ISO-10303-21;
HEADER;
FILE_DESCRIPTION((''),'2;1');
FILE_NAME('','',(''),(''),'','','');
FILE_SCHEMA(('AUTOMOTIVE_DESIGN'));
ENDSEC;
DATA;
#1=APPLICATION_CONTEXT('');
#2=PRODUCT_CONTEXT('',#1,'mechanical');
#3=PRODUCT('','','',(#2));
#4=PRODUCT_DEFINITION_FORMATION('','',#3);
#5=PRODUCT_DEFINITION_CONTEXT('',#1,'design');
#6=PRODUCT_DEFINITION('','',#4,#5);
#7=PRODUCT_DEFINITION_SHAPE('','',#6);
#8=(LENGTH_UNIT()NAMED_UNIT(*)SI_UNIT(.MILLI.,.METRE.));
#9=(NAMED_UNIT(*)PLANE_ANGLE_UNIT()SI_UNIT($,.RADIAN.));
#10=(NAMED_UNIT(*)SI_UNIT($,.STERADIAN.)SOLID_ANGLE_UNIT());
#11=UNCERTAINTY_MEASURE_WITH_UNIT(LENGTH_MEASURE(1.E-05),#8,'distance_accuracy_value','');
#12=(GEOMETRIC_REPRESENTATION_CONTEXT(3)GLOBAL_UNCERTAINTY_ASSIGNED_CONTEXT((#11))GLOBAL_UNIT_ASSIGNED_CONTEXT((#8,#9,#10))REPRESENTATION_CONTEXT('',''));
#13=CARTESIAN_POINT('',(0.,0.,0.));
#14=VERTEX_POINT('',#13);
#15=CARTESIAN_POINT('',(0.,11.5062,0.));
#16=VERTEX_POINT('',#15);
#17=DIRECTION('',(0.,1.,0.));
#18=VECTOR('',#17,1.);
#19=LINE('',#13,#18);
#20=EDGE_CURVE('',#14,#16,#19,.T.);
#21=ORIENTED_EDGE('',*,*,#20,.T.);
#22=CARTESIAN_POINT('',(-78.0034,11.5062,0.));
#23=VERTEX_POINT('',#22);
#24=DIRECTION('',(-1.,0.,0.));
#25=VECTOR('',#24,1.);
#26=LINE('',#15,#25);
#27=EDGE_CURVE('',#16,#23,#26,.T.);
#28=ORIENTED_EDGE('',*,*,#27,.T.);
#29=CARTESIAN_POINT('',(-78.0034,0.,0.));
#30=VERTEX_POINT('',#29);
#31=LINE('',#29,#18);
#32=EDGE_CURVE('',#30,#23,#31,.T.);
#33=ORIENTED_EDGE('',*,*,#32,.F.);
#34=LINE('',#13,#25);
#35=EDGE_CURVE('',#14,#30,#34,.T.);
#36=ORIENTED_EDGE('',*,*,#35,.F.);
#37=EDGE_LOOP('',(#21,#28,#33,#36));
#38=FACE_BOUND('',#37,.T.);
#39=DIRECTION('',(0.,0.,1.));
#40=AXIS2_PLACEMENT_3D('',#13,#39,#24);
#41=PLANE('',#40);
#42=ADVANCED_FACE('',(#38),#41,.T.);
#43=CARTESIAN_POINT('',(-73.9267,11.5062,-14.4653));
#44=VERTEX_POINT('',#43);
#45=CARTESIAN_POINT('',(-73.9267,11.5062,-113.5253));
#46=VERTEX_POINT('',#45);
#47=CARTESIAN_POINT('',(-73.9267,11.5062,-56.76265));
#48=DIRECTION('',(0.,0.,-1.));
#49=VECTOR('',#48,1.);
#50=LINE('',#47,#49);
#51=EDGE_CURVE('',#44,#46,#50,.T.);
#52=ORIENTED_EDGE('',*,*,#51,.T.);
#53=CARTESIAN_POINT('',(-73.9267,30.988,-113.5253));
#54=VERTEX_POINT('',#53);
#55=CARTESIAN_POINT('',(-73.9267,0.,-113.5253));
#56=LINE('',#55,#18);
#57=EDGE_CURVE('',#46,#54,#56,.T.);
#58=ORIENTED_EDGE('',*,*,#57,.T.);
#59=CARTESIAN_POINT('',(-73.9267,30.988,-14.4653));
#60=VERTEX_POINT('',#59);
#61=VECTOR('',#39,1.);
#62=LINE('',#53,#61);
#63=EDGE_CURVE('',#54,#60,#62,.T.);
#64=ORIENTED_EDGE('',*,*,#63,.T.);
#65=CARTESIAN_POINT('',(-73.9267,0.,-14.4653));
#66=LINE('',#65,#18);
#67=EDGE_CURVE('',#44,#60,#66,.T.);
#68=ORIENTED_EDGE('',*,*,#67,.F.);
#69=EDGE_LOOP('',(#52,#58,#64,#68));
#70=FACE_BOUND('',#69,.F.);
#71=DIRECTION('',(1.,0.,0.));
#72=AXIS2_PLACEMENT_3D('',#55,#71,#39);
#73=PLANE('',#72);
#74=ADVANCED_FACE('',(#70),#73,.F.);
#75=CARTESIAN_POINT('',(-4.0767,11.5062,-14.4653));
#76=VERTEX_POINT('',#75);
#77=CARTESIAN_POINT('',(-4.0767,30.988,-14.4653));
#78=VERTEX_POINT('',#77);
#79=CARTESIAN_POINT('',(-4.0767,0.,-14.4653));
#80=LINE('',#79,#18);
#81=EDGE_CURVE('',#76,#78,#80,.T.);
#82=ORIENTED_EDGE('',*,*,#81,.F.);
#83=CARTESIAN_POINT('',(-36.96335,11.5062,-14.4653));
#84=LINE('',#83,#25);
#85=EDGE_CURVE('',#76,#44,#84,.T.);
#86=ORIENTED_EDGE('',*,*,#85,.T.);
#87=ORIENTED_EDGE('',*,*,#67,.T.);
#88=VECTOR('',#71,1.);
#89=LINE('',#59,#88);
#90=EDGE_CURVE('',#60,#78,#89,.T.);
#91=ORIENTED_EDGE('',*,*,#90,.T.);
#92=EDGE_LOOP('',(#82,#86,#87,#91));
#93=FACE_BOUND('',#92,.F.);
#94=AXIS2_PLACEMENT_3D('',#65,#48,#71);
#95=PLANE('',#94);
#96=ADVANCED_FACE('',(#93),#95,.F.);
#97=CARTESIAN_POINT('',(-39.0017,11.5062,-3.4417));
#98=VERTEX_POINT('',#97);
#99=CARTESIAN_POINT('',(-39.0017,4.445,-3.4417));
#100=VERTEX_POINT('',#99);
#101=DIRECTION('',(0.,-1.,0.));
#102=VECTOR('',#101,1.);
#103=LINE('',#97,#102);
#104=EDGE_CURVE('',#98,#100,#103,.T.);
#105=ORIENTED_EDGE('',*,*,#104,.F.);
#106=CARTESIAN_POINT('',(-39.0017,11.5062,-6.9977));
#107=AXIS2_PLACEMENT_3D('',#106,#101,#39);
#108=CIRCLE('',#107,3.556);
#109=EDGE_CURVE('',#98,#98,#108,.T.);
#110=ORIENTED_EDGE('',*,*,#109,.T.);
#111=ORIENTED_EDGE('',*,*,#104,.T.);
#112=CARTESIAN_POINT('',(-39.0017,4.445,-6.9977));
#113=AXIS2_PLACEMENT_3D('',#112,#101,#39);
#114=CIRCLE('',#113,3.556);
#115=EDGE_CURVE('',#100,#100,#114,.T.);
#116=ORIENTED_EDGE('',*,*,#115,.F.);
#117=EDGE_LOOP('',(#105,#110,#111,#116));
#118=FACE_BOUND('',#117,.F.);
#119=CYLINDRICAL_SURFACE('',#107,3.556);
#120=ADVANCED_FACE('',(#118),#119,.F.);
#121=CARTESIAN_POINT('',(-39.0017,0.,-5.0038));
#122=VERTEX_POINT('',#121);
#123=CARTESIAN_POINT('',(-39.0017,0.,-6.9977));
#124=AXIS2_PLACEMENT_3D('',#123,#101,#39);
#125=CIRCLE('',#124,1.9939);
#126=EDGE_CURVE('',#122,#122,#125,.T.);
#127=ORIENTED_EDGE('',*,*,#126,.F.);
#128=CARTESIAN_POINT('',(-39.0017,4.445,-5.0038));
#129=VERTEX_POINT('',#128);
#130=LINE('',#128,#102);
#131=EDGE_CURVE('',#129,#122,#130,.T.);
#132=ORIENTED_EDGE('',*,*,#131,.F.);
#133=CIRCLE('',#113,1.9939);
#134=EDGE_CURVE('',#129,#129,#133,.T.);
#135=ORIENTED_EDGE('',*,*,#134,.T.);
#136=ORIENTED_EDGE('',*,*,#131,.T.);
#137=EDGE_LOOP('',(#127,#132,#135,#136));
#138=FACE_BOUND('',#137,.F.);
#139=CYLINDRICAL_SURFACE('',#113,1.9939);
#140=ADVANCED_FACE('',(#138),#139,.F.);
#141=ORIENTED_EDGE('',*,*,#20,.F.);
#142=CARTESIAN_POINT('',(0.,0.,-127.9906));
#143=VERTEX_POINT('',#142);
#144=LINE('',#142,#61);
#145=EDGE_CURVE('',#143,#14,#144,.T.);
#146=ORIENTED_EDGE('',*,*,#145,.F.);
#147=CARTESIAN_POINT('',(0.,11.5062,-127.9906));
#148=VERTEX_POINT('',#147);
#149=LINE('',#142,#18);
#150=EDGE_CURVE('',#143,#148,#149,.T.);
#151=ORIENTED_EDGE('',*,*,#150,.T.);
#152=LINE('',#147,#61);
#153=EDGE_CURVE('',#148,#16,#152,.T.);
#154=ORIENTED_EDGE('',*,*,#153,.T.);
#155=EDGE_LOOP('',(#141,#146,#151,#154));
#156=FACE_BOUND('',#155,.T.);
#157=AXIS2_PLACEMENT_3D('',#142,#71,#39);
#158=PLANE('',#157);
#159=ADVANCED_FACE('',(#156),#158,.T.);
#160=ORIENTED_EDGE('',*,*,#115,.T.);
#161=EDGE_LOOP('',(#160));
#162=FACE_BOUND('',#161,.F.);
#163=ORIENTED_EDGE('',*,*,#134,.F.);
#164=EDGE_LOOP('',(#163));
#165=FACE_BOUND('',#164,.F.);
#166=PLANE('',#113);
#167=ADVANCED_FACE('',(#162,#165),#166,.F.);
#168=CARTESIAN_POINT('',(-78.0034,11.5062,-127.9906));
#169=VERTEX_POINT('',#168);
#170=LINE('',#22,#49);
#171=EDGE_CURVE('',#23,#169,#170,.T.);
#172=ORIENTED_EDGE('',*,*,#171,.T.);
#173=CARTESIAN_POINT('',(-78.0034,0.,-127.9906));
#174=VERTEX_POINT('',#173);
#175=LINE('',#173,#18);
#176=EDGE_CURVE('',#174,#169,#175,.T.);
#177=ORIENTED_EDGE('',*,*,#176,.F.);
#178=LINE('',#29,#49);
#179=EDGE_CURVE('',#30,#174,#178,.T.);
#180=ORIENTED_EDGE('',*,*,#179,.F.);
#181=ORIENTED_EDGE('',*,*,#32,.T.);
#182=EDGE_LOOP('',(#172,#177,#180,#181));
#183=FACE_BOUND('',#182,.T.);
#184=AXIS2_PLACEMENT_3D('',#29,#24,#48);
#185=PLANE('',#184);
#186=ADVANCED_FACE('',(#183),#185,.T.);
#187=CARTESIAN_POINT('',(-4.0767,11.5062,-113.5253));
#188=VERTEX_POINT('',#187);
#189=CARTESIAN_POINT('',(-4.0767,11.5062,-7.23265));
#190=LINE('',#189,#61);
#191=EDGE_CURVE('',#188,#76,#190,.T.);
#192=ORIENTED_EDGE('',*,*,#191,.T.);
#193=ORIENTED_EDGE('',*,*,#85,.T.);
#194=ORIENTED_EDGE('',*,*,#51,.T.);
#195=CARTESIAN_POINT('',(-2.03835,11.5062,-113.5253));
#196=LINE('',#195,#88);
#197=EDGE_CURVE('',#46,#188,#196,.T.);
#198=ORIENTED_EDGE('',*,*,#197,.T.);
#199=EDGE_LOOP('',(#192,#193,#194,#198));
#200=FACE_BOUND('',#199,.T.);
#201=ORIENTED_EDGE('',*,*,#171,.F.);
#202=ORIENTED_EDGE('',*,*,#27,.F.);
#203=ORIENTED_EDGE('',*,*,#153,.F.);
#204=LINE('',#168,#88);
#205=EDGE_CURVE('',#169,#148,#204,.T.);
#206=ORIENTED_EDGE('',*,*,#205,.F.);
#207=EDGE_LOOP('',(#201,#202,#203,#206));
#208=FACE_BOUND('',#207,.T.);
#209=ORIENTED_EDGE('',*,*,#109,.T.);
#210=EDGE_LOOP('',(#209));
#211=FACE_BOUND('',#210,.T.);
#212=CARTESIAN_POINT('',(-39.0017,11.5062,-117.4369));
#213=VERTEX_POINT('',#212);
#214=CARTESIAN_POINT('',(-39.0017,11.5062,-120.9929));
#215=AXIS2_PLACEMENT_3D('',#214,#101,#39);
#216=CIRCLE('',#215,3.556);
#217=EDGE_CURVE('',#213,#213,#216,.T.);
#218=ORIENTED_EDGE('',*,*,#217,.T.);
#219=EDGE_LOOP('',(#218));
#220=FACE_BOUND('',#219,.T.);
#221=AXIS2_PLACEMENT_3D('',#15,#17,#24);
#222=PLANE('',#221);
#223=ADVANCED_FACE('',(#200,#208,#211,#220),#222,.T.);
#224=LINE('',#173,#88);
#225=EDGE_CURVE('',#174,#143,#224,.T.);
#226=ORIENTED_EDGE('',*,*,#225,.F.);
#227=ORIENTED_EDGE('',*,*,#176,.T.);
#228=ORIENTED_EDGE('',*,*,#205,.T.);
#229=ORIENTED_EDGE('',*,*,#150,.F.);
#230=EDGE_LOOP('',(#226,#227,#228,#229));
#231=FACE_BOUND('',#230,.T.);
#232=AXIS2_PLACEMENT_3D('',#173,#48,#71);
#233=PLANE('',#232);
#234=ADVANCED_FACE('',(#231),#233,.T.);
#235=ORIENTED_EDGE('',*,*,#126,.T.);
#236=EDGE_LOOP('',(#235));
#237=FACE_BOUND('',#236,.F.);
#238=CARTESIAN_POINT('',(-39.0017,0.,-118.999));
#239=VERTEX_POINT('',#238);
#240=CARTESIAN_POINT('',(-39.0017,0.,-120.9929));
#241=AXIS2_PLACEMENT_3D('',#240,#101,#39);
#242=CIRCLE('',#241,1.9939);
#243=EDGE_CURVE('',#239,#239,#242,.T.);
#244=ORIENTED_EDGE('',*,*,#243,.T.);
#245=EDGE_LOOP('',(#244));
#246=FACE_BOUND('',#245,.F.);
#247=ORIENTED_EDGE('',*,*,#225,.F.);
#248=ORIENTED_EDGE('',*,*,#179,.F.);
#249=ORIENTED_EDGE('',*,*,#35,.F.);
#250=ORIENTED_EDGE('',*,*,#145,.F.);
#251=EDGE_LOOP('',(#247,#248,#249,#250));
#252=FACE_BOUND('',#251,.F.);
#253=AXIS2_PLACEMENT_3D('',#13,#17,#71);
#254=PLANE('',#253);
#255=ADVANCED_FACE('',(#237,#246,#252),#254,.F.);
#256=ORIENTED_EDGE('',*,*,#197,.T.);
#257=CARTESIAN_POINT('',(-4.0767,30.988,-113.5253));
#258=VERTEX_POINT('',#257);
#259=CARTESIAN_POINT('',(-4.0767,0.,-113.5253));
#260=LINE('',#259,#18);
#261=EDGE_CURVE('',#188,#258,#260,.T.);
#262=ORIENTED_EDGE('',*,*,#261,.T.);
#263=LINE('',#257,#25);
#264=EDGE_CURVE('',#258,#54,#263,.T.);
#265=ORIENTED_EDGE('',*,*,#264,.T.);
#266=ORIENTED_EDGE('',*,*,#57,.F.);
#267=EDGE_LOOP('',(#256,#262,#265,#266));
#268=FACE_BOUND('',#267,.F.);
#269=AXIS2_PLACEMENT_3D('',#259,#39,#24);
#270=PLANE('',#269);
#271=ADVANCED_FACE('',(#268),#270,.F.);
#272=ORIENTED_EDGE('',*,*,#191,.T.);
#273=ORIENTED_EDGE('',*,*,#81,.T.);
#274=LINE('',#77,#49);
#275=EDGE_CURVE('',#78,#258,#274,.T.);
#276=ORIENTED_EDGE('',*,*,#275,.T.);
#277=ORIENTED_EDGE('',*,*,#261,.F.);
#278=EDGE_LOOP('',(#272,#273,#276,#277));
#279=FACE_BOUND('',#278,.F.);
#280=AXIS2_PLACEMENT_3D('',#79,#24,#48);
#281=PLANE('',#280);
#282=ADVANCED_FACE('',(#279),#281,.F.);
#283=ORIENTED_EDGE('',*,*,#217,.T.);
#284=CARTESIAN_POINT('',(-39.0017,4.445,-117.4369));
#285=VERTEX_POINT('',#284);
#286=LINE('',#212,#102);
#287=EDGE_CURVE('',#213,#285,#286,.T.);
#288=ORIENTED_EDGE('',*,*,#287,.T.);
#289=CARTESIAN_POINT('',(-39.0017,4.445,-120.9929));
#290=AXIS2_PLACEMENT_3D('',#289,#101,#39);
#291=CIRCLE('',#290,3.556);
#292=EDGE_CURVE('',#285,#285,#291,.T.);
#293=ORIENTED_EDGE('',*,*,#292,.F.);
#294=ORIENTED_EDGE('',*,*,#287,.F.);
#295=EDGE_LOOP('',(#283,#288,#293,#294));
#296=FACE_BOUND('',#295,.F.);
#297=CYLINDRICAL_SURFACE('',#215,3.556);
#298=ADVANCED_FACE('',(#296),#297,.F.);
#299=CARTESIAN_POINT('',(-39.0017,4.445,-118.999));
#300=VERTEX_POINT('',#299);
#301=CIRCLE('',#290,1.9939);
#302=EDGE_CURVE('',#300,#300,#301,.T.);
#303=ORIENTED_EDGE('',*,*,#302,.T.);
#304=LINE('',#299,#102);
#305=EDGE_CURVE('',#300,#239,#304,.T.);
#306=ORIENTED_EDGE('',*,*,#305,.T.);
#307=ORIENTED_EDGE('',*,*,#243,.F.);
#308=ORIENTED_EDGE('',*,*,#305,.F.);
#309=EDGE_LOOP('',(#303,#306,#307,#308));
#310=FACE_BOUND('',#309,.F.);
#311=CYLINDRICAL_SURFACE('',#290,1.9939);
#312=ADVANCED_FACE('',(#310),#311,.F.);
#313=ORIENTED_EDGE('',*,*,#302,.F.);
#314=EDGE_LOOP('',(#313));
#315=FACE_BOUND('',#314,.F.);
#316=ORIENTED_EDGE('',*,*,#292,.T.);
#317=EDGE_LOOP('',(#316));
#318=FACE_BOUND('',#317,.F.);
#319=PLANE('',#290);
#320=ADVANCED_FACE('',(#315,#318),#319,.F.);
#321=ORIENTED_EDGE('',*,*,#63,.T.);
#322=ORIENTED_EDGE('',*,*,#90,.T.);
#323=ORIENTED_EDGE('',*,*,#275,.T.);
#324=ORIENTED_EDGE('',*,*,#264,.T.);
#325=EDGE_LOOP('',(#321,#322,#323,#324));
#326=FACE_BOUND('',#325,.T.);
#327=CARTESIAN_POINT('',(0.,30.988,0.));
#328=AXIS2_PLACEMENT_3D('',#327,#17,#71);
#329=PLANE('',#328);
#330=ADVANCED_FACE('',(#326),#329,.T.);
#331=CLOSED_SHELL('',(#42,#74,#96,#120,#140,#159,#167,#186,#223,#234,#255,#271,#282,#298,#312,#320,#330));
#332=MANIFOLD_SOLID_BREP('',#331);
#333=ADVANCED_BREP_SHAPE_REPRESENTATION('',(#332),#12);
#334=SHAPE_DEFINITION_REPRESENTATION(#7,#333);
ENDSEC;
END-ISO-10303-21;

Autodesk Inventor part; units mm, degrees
ref_plane "YZ Plane" through (0, 0, 0) normal (1, 0, 0) x (0, 1, 0)
ref_plane "XZ Plane" through (0, 0, 0) normal (0, 1, 0) x (-1, 0, 0)
ref_plane "XY Plane" through (0, 0, 0) normal (0, 0, 1) x (1, 0, 0)
sketch "Sketch1" plane through (0, 0, 0) normal (0, 1, 0) x (-1, 0, 0)
  line L0 (0, 0) -> (78.0034, 0)
  line L1 (78.0034, 0) -> (78.0034, -127.9906)
  line L2 (78.0034, -127.9906) -> (0, -127.9906)
  line L3 (0, -127.9906) -> (0, 0)
  dimension "d0" = 127.9906
  dimension "d1" = 78.0034
extrude "Extrusion1" add sketch "Sketch1" along normal blind 11.5062
sketch "Sketch2" plane through (0, 11.5062, 0) normal (0, 1, 0) x (1, 0, 0)
  line L0 (-78.0034, 0) -> (0, 0) projected
  line L1 (0, 127.9906) -> (-78.0034, 127.9906) projected
  line L2 (-39.0017, 0) -> (-39.0017, 127.9906) construction
  line L3 (-78.0034, 127.9906) -> (-78.0034, 0) construction
  line L4 (-78.0034, 63.9953) -> (0, 63.9953) construction
  line L5 (0, 0) -> (0, 127.9906) construction
  point P0 (-39.0017, 6.9977)
  point P1 (-39.0017, 120.9929)
  dimension "d4" = 113.9952
  dimension "d5" = 56.9976
hole "Hole1" at (-39.0017, 11.5062, -6.9977) at (-39.0017, 11.5062, -120.9929) direction (0, -1, 0) diameter 3.9878 depth 11.5062 counterbore diameter 7.112 counterbore depth 7.0612
sketch "Sketch3" plane through (0, 11.5062, 0) normal (0, 1, 0) x (1, 0, 0)
  line L0 (-73.9267, 14.4653) -> (-4.0767, 14.4653)
  line L1 (-4.0767, 14.4653) -> (-4.0767, 113.5253)
  line L2 (-4.0767, 113.5253) -> (-73.9267, 113.5253)
  line L3 (-73.9267, 113.5253) -> (-73.9267, 14.4653)
  line L4 (-78.0034, 0) -> (0, 0) projected
  line L5 (0, 0) -> (0, 127.9906) projected
  line L6 (0, 63.9953) -> (-78.0034, 63.9953) construction
  line L7 (-78.0034, 127.9906) -> (-78.0034, 0) projected
  line L8 (-39.0017, 0) -> (-39.0017, 127.9906) construction
  line L9 (0, 127.9906) -> (-78.0034, 127.9906) projected
  point P0 (-39.0017, 63.9953)
  dimension "d13" = 99.06
  dimension "d15" = 69.85
  dimension "d16" = 49.53
  dimension "d17" = 34.925
extrude "Extrusion2" add sketch "Sketch3" along normal blind 30.988 from surface at -11.5062 contours L3 L2 L1 L0
sketch "Sketch4" plane through (-73.9267, 30.988, -14.4653) normal (0, 1, 0) x (1, 0, 0)
  line L0 (30.8017, -0.4384) -> (30.8017, 99.4984) construction
  line L1 (30.8017, 99.4984) -> (42.6663, 99.4984) construction
  line L2 (42.6663, 99.4984) -> (42.6663, -0.4384) construction
  line L3 (42.6663, -0.4384) -> (30.8017, -0.4384) construction
  line L4 (69.85, 0) -> (0, 0) projected
  line L5 (0, 99.06) -> (69.85, 99.06) projected
  line L6 (0, 0) -> (0, 99.06) projected
  line L7 (69.85, 99.06) -> (69.85, 0) projected
  point P0 (73.9267, -14.4653)
properties part number "receiver box"
